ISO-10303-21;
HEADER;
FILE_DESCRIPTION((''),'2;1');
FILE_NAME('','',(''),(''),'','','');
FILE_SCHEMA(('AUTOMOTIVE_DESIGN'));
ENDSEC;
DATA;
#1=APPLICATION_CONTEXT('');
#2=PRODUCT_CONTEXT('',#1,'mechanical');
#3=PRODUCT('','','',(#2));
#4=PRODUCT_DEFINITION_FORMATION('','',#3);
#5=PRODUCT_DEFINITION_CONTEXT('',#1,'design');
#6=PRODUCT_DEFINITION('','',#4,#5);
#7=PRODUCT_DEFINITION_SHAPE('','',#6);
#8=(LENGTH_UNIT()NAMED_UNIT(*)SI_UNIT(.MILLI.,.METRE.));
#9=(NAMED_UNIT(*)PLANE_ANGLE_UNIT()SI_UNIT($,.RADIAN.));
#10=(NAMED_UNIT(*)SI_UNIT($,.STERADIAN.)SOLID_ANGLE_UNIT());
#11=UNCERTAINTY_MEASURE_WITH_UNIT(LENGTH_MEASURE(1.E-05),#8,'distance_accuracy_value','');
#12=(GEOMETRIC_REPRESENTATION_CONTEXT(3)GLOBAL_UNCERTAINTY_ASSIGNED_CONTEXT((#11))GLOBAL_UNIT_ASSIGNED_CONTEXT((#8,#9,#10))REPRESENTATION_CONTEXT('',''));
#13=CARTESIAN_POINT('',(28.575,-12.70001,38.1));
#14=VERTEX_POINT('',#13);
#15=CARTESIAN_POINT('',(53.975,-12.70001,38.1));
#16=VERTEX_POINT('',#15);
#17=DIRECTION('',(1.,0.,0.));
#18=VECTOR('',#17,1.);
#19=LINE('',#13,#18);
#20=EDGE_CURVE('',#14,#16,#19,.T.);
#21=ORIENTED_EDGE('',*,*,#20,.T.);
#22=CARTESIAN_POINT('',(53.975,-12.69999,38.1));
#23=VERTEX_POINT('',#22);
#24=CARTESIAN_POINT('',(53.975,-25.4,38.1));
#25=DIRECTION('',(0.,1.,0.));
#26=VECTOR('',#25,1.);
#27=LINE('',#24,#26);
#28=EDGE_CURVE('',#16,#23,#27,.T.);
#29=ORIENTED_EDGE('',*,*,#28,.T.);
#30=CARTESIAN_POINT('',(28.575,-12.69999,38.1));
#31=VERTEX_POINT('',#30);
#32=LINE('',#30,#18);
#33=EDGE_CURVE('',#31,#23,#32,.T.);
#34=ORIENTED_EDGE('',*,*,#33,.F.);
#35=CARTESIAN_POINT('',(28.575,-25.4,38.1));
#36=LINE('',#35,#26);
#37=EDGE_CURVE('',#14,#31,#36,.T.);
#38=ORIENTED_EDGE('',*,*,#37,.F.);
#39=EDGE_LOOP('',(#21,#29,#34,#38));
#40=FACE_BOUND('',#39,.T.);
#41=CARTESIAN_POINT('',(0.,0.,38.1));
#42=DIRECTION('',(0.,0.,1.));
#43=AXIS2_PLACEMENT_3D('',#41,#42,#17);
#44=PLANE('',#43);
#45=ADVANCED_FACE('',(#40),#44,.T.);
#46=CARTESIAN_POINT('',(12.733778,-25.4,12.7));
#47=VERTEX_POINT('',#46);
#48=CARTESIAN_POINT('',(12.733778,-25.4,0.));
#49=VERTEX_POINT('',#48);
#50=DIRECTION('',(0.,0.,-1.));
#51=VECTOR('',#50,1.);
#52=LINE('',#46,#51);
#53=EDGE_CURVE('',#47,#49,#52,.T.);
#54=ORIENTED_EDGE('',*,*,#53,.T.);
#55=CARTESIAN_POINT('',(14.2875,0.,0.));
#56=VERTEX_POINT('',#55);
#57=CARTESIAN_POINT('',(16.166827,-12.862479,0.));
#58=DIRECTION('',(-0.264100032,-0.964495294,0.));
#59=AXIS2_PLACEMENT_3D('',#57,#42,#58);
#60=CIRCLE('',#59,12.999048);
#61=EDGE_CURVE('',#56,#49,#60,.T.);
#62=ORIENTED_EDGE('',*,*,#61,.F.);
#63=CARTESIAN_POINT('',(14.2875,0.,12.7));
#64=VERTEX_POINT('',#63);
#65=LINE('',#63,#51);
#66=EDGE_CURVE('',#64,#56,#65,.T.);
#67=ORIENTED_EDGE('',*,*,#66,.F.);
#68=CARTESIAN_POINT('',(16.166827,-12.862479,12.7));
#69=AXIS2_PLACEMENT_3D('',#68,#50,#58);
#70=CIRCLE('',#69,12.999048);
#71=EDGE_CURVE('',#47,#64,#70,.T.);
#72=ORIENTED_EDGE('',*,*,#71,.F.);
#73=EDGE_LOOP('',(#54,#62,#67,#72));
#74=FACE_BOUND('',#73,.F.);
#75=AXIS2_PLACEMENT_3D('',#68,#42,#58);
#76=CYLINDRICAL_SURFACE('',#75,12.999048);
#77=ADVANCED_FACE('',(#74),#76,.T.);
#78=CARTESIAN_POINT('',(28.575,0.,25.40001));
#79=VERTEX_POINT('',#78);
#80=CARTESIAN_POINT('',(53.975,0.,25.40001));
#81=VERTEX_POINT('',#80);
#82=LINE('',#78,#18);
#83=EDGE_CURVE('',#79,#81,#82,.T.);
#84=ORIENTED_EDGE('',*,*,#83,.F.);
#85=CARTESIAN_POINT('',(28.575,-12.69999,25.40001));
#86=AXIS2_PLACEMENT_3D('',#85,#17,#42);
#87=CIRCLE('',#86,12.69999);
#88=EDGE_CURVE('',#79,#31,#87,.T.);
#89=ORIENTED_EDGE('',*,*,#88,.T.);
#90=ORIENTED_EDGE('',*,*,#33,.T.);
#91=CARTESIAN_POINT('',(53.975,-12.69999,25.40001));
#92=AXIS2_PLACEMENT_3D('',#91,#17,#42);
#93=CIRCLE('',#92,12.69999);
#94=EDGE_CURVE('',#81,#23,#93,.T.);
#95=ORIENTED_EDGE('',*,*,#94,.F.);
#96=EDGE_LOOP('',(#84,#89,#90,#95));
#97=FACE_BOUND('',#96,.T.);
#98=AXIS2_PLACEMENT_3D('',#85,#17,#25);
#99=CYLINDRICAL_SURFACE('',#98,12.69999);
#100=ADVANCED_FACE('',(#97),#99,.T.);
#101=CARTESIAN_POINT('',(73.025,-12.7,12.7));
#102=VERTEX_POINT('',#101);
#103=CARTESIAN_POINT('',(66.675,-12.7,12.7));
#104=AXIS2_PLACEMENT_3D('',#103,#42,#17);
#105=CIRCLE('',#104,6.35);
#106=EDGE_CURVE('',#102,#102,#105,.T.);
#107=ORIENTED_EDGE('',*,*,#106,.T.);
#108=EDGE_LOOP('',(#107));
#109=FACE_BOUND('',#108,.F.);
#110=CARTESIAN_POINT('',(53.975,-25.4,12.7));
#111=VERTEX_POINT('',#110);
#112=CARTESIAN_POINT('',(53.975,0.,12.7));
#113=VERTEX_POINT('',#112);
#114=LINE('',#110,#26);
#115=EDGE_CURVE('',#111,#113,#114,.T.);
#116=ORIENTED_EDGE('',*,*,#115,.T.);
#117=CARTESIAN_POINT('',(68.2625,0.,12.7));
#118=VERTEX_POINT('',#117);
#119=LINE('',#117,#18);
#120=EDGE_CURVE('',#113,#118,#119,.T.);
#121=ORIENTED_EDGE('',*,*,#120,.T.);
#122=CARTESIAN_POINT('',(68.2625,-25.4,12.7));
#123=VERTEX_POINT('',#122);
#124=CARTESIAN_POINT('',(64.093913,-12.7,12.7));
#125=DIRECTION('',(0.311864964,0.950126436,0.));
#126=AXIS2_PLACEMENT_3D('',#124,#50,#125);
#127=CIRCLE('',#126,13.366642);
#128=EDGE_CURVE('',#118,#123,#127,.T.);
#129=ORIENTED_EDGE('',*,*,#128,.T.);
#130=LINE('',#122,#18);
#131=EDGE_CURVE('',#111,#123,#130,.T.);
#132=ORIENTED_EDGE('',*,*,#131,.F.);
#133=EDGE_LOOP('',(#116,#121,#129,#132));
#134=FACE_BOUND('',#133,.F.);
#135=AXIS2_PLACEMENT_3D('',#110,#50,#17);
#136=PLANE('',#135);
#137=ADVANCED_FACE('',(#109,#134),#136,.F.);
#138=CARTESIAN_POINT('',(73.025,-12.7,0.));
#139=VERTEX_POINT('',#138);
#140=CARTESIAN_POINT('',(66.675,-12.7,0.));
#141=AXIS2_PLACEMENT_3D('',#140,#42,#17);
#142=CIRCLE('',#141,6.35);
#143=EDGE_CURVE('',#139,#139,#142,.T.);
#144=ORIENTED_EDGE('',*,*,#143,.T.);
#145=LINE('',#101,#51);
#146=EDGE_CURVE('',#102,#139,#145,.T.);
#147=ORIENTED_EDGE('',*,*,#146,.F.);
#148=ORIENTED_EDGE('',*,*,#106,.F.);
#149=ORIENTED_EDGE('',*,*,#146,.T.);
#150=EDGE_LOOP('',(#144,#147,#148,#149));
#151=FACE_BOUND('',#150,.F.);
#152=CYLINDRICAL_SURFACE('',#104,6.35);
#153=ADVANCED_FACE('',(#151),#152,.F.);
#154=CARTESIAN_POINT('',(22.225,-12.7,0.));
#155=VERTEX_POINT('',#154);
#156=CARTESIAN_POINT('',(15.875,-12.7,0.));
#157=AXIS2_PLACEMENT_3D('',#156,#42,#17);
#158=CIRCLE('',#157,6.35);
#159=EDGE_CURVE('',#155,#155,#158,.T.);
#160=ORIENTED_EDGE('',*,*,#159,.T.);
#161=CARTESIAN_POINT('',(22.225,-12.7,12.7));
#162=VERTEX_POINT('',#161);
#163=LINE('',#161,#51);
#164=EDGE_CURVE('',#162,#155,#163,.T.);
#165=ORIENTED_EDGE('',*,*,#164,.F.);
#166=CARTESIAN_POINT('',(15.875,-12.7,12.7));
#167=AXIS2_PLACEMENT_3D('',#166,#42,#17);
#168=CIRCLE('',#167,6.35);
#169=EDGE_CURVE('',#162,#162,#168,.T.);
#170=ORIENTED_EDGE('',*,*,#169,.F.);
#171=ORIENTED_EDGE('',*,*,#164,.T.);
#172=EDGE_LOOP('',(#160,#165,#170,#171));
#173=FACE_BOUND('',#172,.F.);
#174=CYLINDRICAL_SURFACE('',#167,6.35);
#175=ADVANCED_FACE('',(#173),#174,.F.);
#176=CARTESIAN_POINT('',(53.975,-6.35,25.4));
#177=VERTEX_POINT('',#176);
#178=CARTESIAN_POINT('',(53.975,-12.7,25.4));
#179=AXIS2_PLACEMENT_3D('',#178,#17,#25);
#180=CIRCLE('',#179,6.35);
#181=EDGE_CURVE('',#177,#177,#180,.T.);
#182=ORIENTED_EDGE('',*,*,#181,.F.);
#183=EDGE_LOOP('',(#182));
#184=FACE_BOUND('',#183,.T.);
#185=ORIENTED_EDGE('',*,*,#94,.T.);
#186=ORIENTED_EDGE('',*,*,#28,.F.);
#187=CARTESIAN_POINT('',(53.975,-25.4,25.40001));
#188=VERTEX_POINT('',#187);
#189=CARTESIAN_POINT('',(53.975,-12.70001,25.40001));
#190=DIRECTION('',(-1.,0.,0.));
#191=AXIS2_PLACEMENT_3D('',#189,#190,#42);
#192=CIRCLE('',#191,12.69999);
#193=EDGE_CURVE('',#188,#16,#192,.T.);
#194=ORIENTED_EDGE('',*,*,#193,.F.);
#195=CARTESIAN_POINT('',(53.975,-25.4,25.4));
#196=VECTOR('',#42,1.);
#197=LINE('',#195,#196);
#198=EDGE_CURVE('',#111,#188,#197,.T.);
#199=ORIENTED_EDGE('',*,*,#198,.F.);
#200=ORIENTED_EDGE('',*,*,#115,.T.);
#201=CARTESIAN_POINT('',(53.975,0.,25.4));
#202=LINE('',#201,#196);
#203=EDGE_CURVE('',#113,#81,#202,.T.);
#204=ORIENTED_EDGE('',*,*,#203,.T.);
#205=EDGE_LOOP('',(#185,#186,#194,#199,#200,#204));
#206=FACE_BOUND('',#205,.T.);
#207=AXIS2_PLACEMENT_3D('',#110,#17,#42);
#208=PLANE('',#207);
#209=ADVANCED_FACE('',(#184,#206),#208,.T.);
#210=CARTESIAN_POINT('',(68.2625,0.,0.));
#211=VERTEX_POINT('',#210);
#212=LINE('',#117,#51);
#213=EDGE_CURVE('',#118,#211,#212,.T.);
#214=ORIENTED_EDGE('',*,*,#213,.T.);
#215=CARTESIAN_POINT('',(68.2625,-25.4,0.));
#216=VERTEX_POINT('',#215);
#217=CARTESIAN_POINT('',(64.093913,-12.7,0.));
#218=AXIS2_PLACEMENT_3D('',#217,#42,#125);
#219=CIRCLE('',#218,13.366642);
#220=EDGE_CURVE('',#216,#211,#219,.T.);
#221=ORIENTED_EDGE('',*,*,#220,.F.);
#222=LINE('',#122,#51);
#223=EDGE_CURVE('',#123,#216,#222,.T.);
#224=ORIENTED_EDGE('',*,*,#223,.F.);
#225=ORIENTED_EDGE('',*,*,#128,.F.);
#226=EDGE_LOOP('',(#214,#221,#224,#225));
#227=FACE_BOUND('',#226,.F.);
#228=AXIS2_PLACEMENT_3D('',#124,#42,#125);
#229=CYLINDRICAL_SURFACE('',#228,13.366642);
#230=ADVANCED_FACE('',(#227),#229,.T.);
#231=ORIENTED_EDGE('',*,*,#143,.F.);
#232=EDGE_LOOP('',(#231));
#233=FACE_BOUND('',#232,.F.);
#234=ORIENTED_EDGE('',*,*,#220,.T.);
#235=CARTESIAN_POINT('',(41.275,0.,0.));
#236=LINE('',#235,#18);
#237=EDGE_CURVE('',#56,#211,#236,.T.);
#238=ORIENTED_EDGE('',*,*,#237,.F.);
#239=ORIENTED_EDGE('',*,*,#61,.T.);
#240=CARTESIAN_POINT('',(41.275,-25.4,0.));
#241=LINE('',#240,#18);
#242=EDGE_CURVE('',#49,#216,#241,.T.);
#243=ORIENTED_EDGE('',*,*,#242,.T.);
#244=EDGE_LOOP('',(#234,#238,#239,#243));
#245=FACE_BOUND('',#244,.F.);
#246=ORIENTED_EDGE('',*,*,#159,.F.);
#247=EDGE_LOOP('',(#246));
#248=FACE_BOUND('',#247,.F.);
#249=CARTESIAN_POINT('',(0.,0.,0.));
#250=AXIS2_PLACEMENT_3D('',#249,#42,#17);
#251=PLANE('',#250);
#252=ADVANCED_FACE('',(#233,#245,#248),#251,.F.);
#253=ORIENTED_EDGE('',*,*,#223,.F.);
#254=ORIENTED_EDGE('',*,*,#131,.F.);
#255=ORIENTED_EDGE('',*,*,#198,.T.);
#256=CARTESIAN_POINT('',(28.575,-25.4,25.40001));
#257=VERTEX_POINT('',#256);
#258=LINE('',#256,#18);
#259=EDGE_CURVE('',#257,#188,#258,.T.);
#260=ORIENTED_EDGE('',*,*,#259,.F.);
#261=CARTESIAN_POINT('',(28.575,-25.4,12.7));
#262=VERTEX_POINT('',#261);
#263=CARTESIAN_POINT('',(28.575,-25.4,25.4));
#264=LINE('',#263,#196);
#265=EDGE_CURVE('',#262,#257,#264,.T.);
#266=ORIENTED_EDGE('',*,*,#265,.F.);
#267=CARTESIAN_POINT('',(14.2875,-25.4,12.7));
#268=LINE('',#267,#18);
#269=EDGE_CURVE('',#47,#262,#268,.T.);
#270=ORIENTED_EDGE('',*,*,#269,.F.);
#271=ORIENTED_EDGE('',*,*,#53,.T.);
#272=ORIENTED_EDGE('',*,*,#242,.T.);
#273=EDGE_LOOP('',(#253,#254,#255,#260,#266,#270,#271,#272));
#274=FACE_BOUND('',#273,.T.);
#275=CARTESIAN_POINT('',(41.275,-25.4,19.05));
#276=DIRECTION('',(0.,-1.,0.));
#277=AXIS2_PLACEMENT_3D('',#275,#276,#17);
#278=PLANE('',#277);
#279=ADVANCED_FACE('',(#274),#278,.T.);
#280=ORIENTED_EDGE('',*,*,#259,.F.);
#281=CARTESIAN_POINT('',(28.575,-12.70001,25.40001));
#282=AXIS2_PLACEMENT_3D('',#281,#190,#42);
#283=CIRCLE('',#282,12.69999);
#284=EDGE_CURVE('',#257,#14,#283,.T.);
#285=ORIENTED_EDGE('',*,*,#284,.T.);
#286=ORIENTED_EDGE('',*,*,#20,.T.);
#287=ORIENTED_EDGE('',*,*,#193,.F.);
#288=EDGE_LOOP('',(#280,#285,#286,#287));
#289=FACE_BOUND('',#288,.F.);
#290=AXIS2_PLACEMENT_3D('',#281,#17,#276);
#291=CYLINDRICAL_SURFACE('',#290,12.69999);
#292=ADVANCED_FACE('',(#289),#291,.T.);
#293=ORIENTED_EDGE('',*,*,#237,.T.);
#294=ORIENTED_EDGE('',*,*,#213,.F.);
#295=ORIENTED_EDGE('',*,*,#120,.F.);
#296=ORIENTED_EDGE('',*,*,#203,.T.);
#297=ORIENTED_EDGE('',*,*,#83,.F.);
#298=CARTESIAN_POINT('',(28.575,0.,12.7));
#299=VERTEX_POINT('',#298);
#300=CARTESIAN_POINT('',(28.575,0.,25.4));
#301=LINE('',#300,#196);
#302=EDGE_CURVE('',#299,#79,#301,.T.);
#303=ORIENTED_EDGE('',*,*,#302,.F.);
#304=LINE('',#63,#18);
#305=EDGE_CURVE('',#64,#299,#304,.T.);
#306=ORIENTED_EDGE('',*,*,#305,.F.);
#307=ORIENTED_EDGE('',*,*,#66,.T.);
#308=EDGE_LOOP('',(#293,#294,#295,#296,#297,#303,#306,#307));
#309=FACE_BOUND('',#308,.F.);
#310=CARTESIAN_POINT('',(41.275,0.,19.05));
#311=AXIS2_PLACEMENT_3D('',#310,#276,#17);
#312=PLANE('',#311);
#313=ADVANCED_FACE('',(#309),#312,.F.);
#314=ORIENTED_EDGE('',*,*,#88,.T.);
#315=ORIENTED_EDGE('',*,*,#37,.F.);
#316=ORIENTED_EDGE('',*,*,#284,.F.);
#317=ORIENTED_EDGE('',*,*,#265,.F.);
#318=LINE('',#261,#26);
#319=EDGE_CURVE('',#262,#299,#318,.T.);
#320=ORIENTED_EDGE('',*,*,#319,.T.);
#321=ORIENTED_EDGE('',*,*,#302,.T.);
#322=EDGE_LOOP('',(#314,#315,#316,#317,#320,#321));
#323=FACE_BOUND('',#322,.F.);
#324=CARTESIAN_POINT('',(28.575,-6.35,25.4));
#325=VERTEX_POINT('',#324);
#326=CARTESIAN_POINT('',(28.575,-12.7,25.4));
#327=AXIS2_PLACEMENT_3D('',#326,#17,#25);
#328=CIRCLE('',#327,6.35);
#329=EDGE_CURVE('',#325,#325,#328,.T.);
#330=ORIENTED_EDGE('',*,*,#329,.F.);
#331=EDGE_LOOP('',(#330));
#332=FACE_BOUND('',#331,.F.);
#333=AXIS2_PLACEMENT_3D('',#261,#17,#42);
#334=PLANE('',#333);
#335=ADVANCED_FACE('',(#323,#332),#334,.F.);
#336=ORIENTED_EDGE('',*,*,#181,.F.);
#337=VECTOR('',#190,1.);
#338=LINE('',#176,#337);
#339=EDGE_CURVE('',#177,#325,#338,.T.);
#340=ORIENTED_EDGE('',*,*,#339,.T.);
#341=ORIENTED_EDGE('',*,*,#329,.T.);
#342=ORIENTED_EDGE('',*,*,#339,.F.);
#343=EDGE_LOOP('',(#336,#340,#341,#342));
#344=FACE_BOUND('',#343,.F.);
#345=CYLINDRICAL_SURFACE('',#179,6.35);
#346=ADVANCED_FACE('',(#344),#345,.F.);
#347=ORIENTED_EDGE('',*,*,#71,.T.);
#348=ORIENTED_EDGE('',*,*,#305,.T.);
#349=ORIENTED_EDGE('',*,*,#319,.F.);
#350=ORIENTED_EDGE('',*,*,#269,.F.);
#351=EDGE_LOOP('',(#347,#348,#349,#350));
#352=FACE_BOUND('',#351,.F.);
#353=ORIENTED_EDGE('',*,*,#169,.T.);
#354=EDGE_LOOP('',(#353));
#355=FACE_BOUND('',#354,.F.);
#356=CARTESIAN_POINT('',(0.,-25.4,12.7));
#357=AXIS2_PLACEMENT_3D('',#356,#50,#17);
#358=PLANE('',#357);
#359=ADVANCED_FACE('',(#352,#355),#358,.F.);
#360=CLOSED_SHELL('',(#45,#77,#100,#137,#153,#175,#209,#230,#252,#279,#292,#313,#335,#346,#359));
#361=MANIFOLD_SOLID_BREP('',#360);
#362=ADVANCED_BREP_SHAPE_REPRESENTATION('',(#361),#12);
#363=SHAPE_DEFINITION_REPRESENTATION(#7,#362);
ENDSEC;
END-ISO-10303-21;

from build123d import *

# Parameters (mm, degrees)
F0_W      = 82.55
F0_H      = 38.1
F1_DEPTH  = 25.4
F2_W      = 28.575
F2_H      = 25.4
F3_DEPTH  = 25.4
F4_R      = 12.69999
F6_DEPTH  = 25.4
F8_DEPTH  = 25.4
F9_R      = 6.35
F10_DEPTH = 25.4
F11_R     = 6.35
F12_DEPTH = 25.4
F13_R     = 6.35
F14_DEPTH = 25.4


# Not quite as in the source:
# - a fillet or chamfer is up to 0.001 mm smaller than in the source, because OpenCascade refuses the exact size
# - a feature names something its author has since deleted; it is built from what else it names


with BuildPart() as f1:
    # F0 (on Front) → F1 (new body)
    with BuildSketch(Plane.XZ):
        with Locations((41.275, 19.05)):
            Rectangle(F0_W, F0_H)
    extrude(amount=F1_DEPTH)

    # F2 (on face) → F3 (cut)
    with BuildSketch(Plane.XZ.offset(25.4)):
        with Locations((14.2875, 25.4)):
            Rectangle(F2_W, F2_H)
        with Locations((68.2625, 25.4)):
            Rectangle(F2_W, F2_H)
    extrude(amount=-F3_DEPTH, mode=Mode.SUBTRACT)

    # F4 (radius 12.7 in the source; OpenCascade refuses exactly that, so slightly less here)
    f4_edges = [f1.edges().sort_by_distance(p)[0] for p in [
        (41.275, 0, 38.1),
        (41.275, -25.4, 38.1),
    ]]
    fillet(f4_edges, radius=F4_R)

    # F5 (on face) → F6 (cut)
    with BuildSketch(Plane.XY.offset(12.7)):
        with BuildLine():
            ThreePointArc((68.2625, 0), (77.4605547287, -12.7), (68.2625, -25.4))
            Line((68.2625, -25.4), (82.55, -25.4))
            Line((82.55, -25.4), (82.55, 0))
            Line((82.55, 0), (68.2625, 0))
        make_face()
    extrude(amount=-F6_DEPTH, mode=Mode.SUBTRACT)

    # F7 (on face) → F8 (cut)
    with BuildSketch(Plane.XY.offset(12.7)):
        with BuildLine():
            ThreePointArc((12.733777985, -25.4), (3.1920308375, -12.0688091081), (14.2875, 0))
            Line((14.2875, 0), (0, 0))
            Line((0, 0), (0, -25.4))
            Line((0, -25.4), (12.733777985, -25.4))
        make_face()
    extrude(amount=-F8_DEPTH, mode=Mode.SUBTRACT)

    # F9 (on face) → F10 (cut)
    with BuildSketch(Plane.XY.offset(12.7)):
        with Locations((66.675, -12.7)):
            Circle(F9_R)
    extrude(amount=-F10_DEPTH, mode=Mode.SUBTRACT)

    # F11 (on face) → F12 (cut)
    with BuildSketch(Plane.XY.offset(12.7)):
        with Locations((15.875, -12.7)):
            Circle(F11_R)
    extrude(amount=-F12_DEPTH, mode=Mode.SUBTRACT)

    # F13 (on face) → F14 (cut)
    with BuildSketch(Plane.YZ.offset(53.975)):
        with Locations((-12.7, 25.4)):
            Circle(F13_R)
    extrude(amount=-F14_DEPTH, mode=Mode.SUBTRACT)


solid = f1.part
